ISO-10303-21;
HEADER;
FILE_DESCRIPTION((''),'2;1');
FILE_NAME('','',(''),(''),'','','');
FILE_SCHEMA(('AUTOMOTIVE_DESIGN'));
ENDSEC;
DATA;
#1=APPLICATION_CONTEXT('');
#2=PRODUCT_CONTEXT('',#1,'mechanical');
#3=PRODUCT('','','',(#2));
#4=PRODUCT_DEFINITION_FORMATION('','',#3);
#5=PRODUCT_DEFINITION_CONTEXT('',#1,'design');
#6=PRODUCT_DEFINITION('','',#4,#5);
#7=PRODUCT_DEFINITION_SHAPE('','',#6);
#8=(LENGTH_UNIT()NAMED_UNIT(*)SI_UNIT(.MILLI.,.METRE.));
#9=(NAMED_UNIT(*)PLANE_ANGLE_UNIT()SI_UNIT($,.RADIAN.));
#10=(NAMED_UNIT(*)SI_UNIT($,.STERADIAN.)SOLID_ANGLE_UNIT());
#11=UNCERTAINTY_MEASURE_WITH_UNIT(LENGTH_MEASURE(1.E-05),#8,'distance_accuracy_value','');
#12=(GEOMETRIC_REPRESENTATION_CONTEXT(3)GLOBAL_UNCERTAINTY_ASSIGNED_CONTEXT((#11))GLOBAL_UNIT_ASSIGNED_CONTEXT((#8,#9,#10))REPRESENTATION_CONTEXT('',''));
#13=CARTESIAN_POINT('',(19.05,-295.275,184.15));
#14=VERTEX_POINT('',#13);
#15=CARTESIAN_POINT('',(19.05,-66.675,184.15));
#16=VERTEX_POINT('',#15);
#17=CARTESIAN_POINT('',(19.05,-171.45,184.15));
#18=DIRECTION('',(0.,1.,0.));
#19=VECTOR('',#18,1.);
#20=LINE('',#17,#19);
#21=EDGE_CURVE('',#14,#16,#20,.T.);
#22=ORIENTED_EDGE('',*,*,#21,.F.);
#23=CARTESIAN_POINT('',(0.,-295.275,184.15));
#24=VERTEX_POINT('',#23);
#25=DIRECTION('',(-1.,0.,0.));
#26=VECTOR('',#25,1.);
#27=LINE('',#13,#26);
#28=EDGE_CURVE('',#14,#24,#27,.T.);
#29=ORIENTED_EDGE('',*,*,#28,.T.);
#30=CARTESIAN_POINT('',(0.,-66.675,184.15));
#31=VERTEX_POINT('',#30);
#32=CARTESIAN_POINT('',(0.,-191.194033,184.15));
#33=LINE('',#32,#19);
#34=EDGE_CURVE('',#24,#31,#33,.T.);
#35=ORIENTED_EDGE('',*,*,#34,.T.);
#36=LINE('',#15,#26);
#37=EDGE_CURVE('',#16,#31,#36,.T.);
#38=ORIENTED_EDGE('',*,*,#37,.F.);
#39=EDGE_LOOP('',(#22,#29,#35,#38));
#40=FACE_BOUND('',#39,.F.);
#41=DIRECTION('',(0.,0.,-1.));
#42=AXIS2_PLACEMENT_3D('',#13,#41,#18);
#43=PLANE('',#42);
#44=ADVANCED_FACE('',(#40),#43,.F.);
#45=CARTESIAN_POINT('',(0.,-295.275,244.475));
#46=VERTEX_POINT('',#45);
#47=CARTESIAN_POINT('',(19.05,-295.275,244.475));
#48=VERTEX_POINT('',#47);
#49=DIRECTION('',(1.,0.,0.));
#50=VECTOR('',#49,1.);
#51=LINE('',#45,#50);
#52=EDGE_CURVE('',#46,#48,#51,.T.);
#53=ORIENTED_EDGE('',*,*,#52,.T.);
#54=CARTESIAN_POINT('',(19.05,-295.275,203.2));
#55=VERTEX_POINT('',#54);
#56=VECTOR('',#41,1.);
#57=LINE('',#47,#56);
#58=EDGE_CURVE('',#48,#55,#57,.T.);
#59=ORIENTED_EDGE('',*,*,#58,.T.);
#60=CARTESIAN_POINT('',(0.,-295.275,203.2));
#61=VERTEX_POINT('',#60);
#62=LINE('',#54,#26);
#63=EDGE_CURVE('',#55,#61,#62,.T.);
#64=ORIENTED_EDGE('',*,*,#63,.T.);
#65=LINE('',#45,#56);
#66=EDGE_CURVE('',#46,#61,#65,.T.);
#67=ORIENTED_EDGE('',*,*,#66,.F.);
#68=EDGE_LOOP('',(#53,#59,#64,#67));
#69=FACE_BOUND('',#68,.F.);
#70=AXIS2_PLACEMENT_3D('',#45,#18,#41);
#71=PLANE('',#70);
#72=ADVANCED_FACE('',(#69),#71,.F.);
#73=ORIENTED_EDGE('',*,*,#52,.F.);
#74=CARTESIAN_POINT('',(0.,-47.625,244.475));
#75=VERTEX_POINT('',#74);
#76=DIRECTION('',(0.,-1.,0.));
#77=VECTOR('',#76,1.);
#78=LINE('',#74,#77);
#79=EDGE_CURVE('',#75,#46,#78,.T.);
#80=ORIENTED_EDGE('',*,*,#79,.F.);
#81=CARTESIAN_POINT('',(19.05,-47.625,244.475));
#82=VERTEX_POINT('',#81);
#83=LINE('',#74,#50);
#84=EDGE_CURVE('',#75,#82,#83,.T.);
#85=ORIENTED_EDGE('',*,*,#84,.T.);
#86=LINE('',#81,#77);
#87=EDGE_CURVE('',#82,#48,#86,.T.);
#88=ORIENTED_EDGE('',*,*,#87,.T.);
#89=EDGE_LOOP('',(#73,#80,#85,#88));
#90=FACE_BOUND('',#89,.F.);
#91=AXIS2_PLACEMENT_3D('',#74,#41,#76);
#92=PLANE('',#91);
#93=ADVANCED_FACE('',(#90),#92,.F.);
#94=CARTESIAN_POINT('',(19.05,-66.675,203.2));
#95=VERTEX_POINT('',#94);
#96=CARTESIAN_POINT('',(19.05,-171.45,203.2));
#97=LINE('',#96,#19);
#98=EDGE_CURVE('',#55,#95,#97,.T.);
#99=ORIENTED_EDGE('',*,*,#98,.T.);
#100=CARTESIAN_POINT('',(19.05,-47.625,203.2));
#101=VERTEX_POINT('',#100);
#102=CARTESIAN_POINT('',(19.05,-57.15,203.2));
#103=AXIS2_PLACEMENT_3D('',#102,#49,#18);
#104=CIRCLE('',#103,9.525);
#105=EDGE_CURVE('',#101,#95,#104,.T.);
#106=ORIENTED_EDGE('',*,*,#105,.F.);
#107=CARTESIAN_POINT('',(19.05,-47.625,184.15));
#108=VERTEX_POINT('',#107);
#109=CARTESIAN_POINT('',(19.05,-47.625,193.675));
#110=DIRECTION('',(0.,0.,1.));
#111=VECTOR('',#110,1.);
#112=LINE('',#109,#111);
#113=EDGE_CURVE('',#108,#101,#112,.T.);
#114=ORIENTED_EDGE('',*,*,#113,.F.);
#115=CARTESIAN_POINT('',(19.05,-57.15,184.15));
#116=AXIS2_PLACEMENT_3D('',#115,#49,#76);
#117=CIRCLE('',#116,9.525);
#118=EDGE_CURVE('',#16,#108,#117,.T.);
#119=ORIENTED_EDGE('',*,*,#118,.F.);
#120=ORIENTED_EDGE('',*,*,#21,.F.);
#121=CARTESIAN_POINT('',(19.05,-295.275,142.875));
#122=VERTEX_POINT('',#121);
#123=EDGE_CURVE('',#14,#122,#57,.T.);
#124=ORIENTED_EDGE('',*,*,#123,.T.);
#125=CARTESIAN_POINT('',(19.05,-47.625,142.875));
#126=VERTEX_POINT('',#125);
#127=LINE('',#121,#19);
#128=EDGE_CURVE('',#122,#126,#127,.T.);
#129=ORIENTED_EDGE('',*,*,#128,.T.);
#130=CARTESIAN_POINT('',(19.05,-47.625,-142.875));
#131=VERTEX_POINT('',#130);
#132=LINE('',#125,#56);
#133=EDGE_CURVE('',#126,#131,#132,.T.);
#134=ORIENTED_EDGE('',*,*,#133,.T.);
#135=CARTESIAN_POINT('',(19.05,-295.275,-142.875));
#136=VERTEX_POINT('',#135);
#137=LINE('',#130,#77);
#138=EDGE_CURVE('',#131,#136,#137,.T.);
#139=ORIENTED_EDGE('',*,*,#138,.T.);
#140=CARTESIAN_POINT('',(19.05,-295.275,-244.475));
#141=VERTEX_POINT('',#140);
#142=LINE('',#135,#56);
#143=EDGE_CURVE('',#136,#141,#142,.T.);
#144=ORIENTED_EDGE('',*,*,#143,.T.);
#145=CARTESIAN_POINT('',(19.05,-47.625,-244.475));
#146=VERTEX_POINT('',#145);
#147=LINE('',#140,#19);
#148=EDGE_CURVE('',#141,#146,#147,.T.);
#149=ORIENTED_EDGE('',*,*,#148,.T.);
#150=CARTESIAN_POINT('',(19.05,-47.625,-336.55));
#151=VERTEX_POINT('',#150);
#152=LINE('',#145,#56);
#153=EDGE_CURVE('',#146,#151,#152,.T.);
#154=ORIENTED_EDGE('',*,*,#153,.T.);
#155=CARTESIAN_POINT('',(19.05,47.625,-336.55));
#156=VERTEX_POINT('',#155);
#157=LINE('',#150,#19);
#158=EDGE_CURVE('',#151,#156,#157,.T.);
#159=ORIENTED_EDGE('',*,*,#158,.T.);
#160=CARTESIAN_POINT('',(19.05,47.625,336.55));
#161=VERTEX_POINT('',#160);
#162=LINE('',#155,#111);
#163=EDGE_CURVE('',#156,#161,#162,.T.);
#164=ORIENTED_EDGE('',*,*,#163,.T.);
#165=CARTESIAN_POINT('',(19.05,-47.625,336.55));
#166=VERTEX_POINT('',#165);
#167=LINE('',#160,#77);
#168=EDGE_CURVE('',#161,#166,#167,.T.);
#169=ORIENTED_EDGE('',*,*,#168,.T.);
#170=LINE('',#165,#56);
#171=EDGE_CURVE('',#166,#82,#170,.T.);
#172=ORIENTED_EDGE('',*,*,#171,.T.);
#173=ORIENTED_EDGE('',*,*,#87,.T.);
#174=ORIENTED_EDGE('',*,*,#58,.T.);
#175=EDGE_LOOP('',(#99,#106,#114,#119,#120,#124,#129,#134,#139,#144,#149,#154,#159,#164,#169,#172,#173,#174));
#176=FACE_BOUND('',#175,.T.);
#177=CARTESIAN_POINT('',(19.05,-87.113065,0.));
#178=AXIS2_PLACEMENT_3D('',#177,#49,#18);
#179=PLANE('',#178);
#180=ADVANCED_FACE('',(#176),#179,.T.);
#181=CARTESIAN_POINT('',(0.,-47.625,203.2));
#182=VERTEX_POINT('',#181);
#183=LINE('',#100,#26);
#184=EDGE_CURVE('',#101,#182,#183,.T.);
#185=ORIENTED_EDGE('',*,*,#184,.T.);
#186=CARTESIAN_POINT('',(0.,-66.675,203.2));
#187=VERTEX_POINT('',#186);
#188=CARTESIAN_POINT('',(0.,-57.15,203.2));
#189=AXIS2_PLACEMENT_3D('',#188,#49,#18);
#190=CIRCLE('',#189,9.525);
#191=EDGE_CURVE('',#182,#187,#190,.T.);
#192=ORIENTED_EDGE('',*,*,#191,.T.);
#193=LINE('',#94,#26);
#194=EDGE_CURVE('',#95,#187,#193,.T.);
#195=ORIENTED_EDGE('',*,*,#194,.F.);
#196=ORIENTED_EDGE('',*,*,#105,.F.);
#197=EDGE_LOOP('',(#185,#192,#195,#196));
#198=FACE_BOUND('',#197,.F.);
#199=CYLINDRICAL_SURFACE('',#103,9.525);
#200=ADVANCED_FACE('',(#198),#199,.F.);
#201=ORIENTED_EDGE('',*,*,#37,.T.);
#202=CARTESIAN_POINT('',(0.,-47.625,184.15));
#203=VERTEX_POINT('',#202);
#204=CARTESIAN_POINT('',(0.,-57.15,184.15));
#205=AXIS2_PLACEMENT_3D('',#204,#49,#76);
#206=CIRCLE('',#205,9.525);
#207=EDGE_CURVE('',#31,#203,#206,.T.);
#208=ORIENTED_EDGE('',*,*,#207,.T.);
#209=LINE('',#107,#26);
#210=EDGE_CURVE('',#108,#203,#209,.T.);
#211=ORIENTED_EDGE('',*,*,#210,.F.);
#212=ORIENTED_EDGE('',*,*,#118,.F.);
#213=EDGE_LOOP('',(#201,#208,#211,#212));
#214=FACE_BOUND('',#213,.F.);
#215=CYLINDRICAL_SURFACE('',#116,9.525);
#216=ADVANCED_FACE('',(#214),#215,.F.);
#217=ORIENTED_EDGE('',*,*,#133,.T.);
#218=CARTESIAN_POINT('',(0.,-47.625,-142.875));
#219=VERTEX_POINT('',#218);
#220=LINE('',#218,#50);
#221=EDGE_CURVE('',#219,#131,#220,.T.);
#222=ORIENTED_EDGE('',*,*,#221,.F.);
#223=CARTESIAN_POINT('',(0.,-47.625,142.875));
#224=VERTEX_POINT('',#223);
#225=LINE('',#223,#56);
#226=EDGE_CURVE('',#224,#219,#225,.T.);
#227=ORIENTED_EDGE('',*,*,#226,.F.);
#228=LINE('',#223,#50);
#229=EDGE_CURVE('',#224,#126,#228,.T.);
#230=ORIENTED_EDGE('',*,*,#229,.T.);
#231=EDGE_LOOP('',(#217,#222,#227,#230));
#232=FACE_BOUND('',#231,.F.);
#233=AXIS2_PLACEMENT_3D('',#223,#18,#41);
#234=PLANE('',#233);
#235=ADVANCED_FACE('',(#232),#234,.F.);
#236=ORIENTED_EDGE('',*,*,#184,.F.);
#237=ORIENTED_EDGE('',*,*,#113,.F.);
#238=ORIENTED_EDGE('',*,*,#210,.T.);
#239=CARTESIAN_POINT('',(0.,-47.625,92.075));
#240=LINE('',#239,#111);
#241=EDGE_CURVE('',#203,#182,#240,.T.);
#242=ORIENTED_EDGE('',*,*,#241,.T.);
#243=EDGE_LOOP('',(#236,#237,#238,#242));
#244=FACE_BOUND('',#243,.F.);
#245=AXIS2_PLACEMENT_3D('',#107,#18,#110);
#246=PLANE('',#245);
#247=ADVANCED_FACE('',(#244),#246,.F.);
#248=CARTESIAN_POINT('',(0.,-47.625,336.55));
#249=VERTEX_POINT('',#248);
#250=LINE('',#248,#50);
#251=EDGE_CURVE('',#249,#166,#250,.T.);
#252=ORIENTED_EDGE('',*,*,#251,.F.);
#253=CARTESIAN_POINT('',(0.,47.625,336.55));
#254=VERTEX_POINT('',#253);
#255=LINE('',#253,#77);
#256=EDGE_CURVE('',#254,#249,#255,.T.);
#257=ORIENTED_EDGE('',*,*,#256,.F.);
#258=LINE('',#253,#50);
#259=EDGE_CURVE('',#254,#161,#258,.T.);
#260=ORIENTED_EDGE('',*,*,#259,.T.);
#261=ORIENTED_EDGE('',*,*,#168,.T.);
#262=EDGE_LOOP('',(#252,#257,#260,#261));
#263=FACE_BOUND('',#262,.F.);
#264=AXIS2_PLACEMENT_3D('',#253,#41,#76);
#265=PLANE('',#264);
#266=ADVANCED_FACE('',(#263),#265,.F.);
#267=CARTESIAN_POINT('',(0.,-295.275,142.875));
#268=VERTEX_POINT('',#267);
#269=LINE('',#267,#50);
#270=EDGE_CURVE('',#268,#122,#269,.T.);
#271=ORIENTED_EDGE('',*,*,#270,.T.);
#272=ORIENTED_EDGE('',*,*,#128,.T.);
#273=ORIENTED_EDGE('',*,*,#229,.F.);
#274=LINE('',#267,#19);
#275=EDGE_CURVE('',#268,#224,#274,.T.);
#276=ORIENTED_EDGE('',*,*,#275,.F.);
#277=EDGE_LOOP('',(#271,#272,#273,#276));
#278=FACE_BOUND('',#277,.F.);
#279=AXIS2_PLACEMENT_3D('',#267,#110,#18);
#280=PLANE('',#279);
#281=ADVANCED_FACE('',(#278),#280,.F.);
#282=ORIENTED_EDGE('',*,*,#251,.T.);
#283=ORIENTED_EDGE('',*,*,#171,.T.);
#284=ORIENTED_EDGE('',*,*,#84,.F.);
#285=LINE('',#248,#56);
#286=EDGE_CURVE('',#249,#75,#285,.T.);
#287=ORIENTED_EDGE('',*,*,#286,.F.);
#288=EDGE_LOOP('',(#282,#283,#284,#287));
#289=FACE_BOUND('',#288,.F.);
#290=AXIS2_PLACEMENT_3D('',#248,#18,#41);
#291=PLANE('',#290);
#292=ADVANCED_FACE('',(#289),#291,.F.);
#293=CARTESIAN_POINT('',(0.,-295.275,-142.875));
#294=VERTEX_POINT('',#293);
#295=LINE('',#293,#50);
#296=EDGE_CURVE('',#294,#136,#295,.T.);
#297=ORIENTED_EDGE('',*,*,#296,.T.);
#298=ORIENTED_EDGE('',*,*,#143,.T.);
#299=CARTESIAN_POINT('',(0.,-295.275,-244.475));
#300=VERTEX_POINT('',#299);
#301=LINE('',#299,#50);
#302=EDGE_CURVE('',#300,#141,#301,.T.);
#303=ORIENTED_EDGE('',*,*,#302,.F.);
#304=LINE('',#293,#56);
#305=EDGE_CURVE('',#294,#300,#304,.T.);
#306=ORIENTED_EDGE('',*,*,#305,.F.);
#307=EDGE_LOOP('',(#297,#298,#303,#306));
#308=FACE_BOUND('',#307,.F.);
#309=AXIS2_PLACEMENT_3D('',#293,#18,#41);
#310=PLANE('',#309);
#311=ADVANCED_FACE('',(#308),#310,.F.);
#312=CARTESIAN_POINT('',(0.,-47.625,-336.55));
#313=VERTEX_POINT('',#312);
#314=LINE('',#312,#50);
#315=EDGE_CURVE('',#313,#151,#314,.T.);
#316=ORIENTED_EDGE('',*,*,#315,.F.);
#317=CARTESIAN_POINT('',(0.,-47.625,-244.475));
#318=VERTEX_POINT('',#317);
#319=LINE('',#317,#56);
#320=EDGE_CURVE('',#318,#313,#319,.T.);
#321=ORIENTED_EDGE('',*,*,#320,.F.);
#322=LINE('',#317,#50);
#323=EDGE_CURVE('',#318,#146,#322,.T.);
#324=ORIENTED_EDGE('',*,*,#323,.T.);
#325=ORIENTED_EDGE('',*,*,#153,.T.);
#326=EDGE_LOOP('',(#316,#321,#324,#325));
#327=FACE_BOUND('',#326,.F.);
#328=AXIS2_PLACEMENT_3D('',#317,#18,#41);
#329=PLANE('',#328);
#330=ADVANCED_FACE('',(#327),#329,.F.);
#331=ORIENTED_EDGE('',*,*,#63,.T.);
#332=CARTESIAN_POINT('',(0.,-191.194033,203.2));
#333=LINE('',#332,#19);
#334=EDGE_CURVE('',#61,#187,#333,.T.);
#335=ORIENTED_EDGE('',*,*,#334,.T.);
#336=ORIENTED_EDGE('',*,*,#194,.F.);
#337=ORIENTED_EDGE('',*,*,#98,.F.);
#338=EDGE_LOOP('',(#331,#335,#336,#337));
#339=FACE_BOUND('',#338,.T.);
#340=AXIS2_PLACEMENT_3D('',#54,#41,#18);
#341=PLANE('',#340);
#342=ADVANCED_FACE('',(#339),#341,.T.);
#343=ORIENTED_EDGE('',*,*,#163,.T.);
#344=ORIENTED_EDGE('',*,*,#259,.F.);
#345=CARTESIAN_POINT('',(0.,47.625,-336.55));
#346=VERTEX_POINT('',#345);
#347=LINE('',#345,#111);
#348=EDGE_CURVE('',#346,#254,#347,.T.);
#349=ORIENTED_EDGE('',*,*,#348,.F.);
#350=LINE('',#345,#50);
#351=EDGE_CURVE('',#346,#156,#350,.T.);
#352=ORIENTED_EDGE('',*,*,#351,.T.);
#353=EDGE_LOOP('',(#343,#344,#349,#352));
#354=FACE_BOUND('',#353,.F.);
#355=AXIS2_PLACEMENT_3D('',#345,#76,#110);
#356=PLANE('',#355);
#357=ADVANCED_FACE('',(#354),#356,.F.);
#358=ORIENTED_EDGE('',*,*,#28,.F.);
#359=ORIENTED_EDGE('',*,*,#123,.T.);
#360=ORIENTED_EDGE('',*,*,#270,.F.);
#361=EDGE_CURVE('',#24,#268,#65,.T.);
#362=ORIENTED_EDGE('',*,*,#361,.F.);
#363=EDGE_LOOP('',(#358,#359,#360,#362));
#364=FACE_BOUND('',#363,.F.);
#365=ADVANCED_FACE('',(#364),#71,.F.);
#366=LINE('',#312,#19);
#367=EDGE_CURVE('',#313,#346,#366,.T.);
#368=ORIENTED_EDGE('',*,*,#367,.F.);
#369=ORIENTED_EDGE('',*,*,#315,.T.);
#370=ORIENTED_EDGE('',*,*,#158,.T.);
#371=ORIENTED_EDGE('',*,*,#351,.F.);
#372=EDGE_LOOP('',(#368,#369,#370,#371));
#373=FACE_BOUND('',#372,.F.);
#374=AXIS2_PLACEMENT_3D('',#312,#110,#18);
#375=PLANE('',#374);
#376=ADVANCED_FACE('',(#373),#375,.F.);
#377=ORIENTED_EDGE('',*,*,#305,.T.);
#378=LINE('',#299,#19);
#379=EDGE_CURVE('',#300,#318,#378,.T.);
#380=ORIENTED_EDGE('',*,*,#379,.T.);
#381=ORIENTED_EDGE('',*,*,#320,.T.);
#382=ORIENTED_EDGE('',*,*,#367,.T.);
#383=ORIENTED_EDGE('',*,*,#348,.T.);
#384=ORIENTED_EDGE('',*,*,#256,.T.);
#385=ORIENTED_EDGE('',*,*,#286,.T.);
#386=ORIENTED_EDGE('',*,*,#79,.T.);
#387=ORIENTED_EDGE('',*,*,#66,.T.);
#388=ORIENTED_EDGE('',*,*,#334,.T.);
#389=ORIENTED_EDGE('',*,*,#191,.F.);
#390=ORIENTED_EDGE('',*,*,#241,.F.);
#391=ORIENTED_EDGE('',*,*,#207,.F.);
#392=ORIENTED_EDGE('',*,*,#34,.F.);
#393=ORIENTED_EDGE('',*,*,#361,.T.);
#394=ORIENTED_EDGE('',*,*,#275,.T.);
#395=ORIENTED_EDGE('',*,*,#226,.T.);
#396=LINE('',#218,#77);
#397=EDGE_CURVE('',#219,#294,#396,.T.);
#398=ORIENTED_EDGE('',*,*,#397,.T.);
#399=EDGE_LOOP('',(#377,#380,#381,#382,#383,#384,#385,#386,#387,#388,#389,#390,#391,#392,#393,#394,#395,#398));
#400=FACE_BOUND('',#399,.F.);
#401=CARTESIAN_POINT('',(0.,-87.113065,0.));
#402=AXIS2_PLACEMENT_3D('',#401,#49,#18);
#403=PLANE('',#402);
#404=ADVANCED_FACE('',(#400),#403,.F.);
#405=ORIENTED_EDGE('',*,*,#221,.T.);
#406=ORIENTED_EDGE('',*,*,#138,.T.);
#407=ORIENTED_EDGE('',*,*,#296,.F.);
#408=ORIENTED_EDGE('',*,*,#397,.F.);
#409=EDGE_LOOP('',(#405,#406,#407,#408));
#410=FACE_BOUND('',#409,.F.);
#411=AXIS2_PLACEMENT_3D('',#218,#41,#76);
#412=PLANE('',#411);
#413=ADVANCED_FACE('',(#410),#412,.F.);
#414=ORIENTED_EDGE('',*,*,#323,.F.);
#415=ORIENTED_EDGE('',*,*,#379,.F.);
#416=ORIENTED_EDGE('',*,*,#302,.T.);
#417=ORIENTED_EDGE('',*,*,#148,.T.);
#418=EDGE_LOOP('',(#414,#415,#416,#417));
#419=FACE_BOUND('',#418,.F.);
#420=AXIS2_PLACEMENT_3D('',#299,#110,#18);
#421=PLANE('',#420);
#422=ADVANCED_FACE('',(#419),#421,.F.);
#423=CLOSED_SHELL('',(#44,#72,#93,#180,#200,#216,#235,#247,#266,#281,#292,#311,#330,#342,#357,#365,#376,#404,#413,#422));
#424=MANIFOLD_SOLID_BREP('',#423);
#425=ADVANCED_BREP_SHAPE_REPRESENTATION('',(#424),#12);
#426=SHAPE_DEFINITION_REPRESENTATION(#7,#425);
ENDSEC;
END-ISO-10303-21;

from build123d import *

# Parameters (mm, degrees)
F2_DEPTH = 19.05
F3_W     = 247.65
F3_H     = 19.05
F4_DEPTH = 25.4
F6_DEPTH = 25.4


# Not quite as in the source:
# - a variable given as a bare number and used for a length is read in inches; the dataset says mm whatever the document's units were


with BuildPart() as f2:
    # F1 (on Right) → F2 (new body)
    with BuildSketch(Plane.YZ):
        Polygon((-47.625, 142.875), (-47.625, 0), (-47.625, -142.875), (-295.275, -142.875), (-295.275, -244.475), (-47.625, -244.475), (-47.625, -336.55), (47.625, -336.55), (47.625, 0), (47.625, 336.55), (-47.625, 336.55), (-47.625, 244.475), (-295.275, 244.475), (-295.275, 142.875), align=None)
    extrude(amount=F2_DEPTH)

    # F3 (on face) → F4 (cut)
    with BuildSketch(Plane.YZ.offset(19.05)):
        with Locations((-171.45, 193.675)):
            Rectangle(F3_W, F3_H)
    extrude(amount=-F4_DEPTH, mode=Mode.SUBTRACT)

    # F5 (on face) → F6 (cut)
    with BuildSketch(Plane.YZ.offset(19.05)):
        with BuildLine():
            Line((-47.625, 184.15), (-47.625, 203.2))
            ThreePointArc((-47.625, 203.2), (-57.15, 212.725), (-66.675, 203.2))
            Line((-66.675, 203.2), (-66.675, 184.15))
            ThreePointArc((-66.675, 184.15), (-57.15, 174.625), (-47.625, 184.15))
        make_face()
    extrude(amount=-F6_DEPTH, mode=Mode.SUBTRACT)


solid = f2.part
